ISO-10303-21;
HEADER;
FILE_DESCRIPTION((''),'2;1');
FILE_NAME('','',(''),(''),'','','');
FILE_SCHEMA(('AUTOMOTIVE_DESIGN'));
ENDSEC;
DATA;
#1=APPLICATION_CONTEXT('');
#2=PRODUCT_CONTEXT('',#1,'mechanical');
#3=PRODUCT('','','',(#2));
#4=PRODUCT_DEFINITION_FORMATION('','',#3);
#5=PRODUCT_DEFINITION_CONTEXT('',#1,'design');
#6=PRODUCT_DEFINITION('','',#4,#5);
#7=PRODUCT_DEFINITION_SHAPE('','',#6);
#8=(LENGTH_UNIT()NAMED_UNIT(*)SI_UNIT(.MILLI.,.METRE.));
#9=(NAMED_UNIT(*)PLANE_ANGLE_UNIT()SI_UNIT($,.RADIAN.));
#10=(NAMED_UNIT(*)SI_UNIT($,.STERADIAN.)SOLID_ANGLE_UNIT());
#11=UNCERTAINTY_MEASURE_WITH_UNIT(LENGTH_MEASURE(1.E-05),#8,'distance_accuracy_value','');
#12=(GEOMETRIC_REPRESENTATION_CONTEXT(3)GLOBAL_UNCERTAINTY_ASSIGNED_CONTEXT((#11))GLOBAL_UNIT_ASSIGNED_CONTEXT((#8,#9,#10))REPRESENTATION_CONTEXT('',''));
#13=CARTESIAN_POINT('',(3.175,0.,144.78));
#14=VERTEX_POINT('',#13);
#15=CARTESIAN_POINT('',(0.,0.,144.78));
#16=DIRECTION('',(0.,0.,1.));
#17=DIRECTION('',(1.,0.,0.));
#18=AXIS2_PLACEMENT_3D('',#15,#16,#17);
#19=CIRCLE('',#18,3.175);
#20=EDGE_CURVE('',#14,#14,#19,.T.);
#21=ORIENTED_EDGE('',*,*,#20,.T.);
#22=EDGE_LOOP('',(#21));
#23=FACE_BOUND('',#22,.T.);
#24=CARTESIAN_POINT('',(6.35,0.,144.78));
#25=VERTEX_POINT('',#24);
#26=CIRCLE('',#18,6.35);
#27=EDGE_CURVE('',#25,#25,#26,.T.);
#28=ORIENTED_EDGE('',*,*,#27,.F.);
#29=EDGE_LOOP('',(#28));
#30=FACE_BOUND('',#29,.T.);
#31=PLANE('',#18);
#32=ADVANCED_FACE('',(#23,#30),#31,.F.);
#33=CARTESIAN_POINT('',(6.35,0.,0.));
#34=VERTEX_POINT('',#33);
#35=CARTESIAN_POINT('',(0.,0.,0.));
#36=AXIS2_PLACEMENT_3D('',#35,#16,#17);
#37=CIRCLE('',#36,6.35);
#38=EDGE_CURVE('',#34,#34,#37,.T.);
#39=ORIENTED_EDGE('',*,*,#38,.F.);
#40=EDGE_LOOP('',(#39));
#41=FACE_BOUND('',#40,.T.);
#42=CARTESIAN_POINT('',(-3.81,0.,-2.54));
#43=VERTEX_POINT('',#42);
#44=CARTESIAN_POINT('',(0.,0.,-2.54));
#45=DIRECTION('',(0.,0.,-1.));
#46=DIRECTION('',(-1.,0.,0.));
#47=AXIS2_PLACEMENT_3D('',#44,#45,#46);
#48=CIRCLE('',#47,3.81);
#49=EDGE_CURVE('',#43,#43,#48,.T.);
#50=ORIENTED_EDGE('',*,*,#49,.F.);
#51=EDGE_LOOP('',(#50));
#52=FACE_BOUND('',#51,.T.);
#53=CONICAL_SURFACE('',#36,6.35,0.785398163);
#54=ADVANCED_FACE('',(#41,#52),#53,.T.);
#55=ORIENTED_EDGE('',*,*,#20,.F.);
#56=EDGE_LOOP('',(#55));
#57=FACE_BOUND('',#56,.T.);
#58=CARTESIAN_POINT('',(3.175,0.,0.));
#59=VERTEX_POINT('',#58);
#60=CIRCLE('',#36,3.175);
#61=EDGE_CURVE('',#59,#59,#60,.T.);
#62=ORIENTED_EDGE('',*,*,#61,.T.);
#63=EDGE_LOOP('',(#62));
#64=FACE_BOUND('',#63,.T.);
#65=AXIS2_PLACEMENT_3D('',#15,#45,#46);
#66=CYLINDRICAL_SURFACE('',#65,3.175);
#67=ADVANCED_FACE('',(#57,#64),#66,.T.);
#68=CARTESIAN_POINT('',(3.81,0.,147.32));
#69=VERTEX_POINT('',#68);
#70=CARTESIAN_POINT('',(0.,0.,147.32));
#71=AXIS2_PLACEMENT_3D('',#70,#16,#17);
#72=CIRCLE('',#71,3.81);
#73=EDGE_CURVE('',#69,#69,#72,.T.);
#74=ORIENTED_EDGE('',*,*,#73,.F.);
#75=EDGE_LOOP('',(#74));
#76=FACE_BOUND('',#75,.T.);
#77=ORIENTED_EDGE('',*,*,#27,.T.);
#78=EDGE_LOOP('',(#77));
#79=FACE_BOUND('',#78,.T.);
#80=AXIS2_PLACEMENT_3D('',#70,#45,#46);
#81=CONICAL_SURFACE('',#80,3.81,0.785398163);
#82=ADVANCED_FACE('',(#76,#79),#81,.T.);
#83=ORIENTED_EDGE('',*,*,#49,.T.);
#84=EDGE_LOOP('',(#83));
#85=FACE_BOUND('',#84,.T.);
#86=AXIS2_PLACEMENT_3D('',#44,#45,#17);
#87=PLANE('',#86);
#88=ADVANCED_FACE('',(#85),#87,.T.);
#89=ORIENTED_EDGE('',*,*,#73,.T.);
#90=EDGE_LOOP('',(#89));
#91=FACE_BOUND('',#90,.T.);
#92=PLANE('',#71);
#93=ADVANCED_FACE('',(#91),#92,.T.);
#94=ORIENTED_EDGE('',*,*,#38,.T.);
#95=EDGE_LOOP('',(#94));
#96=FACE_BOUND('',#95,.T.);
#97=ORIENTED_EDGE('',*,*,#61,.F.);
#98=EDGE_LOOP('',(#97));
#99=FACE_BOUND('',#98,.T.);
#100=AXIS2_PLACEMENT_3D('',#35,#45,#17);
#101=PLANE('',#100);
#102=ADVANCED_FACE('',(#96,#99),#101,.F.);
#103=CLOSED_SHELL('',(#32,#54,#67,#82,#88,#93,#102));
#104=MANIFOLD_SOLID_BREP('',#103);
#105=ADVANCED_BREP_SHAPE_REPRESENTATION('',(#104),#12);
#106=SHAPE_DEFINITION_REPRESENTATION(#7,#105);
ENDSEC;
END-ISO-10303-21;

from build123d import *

# Parameters (mm, degrees)
SKETCH1_R                = 3.175
BOSS_EXTRUDE1_DEPTH      = 144.78
SKETCH2_R                = 6.35
BOSS_EXTRUDE2_DEPTH      = 2.54
CHAMFER1_SIZE            = 2.54
CHAMFER1_OF_MIRROR1_SIZE = 2.54


with BuildPart() as part:
    # Sketch1 → Boss-Extrude1 (new body)
    with BuildSketch(Plane.XY):
        Circle(SKETCH1_R)
    extrude(amount=BOSS_EXTRUDE1_DEPTH)

    # Sketch2 → Boss-Extrude2 (add)
    with BuildSketch(Plane.XY.offset(144.78)):
        Circle(SKETCH2_R)
    boss_extrude2 = extrude(amount=BOSS_EXTRUDE2_DEPTH)

    # Chamfer1
    chamfer1_edges = [part.edges().sort_by_distance(p)[0] for p in [
        (-6.35, 0, 147.32),
    ]]
    chamfer(chamfer1_edges, length=CHAMFER1_SIZE - 0.0001)  # a hair under: the kernel refuses the full size

    # Mirror1: Boss-Extrude2 across plane
    add(boss_extrude2.mirror(Plane(origin=(0, 0, 72.39), x_dir=(1, 0, 0), z_dir=(0, 0, -1))))

    # Chamfer1 of Mirror1
    chamfer1_of_mirror1_edges = [part.edges().sort_by_distance(p)[0] for p in [
        (-6.35, 0, -2.54),
    ]]
    chamfer(chamfer1_of_mirror1_edges, length=CHAMFER1_OF_MIRROR1_SIZE - 0.0001)  # a hair under: the kernel refuses the full size


solid = part.part
